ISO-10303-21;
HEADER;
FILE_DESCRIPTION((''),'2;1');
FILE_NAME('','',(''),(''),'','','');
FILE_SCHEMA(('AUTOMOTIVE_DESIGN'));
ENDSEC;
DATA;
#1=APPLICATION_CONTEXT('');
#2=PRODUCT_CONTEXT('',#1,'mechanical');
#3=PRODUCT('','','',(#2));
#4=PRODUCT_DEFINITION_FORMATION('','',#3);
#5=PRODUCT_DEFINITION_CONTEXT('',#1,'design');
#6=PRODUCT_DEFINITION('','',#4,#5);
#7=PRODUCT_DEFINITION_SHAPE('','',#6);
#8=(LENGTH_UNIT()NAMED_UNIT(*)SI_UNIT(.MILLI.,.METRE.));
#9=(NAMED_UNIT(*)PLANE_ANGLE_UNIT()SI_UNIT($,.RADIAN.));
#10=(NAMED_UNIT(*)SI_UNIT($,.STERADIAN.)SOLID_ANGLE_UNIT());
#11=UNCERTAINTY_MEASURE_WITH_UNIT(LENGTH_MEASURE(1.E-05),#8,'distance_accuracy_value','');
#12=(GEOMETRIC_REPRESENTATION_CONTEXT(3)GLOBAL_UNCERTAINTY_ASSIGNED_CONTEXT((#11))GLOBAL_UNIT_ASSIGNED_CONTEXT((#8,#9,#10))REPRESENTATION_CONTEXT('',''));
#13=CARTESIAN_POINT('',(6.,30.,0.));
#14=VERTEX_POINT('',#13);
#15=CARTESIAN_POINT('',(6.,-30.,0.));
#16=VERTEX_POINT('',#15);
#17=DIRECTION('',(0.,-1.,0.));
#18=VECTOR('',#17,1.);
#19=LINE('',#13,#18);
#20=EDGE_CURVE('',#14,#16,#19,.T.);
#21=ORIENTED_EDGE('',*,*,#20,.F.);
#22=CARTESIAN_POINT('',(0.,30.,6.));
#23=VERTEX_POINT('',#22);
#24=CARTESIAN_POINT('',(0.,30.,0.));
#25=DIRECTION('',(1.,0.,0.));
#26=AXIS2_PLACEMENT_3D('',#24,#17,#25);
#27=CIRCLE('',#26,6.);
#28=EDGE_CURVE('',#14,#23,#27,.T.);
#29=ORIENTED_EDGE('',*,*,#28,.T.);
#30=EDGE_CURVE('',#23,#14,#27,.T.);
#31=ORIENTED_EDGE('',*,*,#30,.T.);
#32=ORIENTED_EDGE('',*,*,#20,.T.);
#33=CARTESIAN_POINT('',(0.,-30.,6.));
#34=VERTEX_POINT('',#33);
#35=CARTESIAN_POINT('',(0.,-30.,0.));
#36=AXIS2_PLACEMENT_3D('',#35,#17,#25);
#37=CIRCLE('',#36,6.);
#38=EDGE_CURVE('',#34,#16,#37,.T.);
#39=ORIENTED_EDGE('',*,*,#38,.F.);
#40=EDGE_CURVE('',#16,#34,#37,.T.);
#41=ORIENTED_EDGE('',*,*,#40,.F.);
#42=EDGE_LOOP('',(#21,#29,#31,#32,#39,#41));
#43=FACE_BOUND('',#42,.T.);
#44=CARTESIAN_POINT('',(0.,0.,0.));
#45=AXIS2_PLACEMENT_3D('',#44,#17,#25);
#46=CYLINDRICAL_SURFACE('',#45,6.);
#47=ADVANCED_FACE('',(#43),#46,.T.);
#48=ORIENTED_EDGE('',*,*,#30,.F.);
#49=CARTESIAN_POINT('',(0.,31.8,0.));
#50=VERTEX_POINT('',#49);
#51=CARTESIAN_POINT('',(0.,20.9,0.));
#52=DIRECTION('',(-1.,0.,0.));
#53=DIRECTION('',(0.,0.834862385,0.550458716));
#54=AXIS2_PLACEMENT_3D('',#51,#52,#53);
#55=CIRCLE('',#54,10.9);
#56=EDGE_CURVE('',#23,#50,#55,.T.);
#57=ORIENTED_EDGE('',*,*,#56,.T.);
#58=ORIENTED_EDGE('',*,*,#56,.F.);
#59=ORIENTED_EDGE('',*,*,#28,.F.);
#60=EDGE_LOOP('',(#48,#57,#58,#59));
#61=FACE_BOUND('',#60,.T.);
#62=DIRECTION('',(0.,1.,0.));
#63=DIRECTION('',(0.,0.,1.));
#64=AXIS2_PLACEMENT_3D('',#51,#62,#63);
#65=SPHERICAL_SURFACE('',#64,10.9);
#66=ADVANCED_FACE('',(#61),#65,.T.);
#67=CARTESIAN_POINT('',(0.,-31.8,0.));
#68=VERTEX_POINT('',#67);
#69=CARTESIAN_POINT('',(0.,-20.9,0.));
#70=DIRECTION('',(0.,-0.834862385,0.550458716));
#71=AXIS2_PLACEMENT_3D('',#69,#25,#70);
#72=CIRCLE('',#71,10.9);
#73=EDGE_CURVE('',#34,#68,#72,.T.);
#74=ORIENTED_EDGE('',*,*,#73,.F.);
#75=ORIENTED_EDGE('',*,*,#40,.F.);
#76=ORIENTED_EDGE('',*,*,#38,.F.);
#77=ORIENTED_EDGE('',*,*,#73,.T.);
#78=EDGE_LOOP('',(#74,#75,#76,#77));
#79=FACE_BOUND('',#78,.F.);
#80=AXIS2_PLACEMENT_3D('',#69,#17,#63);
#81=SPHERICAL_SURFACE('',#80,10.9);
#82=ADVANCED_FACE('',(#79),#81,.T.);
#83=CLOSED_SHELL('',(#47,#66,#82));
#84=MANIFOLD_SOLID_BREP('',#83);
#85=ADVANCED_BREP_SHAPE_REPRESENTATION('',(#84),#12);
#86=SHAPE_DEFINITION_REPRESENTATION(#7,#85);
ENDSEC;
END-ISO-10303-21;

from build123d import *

# Parameters (mm, degrees)
F0_R          = 6
F1_DEPTH      = 30
F1_DEPTH_BACK = 30


# Not quite as in the source:
# - a pattern or mirror of a feature is missing from the dataset's text; its kind, count and spacing are read off the source's solid


with BuildPart() as f1:
    # F0 (on Front) → F1 (new body, two sides)
    with BuildSketch(Plane.XZ) as f1_sk:
        Circle(F0_R)
    extrude(amount=F1_DEPTH)
    extrude(f1_sk.sketch, amount=-F1_DEPTH_BACK)

    # F2 (on Right) → F3 (revolve)
    with BuildSketch(Plane.YZ):
        with BuildLine():
            Line((-31.8, 0), (-30, 0))
            Line((-30, 0), (-30, 6))
            ThreePointArc((-30, 6), (-31.3403065089, 3.1320919527), (-31.8, 0))
        make_face()
    f3 = revolve(axis=Axis((0, 0, 0), (0, 1, 0)))

    # F3_copies: F3 across plane
    add(f3.mirror(Plane.ZX))


solid = f1.part
